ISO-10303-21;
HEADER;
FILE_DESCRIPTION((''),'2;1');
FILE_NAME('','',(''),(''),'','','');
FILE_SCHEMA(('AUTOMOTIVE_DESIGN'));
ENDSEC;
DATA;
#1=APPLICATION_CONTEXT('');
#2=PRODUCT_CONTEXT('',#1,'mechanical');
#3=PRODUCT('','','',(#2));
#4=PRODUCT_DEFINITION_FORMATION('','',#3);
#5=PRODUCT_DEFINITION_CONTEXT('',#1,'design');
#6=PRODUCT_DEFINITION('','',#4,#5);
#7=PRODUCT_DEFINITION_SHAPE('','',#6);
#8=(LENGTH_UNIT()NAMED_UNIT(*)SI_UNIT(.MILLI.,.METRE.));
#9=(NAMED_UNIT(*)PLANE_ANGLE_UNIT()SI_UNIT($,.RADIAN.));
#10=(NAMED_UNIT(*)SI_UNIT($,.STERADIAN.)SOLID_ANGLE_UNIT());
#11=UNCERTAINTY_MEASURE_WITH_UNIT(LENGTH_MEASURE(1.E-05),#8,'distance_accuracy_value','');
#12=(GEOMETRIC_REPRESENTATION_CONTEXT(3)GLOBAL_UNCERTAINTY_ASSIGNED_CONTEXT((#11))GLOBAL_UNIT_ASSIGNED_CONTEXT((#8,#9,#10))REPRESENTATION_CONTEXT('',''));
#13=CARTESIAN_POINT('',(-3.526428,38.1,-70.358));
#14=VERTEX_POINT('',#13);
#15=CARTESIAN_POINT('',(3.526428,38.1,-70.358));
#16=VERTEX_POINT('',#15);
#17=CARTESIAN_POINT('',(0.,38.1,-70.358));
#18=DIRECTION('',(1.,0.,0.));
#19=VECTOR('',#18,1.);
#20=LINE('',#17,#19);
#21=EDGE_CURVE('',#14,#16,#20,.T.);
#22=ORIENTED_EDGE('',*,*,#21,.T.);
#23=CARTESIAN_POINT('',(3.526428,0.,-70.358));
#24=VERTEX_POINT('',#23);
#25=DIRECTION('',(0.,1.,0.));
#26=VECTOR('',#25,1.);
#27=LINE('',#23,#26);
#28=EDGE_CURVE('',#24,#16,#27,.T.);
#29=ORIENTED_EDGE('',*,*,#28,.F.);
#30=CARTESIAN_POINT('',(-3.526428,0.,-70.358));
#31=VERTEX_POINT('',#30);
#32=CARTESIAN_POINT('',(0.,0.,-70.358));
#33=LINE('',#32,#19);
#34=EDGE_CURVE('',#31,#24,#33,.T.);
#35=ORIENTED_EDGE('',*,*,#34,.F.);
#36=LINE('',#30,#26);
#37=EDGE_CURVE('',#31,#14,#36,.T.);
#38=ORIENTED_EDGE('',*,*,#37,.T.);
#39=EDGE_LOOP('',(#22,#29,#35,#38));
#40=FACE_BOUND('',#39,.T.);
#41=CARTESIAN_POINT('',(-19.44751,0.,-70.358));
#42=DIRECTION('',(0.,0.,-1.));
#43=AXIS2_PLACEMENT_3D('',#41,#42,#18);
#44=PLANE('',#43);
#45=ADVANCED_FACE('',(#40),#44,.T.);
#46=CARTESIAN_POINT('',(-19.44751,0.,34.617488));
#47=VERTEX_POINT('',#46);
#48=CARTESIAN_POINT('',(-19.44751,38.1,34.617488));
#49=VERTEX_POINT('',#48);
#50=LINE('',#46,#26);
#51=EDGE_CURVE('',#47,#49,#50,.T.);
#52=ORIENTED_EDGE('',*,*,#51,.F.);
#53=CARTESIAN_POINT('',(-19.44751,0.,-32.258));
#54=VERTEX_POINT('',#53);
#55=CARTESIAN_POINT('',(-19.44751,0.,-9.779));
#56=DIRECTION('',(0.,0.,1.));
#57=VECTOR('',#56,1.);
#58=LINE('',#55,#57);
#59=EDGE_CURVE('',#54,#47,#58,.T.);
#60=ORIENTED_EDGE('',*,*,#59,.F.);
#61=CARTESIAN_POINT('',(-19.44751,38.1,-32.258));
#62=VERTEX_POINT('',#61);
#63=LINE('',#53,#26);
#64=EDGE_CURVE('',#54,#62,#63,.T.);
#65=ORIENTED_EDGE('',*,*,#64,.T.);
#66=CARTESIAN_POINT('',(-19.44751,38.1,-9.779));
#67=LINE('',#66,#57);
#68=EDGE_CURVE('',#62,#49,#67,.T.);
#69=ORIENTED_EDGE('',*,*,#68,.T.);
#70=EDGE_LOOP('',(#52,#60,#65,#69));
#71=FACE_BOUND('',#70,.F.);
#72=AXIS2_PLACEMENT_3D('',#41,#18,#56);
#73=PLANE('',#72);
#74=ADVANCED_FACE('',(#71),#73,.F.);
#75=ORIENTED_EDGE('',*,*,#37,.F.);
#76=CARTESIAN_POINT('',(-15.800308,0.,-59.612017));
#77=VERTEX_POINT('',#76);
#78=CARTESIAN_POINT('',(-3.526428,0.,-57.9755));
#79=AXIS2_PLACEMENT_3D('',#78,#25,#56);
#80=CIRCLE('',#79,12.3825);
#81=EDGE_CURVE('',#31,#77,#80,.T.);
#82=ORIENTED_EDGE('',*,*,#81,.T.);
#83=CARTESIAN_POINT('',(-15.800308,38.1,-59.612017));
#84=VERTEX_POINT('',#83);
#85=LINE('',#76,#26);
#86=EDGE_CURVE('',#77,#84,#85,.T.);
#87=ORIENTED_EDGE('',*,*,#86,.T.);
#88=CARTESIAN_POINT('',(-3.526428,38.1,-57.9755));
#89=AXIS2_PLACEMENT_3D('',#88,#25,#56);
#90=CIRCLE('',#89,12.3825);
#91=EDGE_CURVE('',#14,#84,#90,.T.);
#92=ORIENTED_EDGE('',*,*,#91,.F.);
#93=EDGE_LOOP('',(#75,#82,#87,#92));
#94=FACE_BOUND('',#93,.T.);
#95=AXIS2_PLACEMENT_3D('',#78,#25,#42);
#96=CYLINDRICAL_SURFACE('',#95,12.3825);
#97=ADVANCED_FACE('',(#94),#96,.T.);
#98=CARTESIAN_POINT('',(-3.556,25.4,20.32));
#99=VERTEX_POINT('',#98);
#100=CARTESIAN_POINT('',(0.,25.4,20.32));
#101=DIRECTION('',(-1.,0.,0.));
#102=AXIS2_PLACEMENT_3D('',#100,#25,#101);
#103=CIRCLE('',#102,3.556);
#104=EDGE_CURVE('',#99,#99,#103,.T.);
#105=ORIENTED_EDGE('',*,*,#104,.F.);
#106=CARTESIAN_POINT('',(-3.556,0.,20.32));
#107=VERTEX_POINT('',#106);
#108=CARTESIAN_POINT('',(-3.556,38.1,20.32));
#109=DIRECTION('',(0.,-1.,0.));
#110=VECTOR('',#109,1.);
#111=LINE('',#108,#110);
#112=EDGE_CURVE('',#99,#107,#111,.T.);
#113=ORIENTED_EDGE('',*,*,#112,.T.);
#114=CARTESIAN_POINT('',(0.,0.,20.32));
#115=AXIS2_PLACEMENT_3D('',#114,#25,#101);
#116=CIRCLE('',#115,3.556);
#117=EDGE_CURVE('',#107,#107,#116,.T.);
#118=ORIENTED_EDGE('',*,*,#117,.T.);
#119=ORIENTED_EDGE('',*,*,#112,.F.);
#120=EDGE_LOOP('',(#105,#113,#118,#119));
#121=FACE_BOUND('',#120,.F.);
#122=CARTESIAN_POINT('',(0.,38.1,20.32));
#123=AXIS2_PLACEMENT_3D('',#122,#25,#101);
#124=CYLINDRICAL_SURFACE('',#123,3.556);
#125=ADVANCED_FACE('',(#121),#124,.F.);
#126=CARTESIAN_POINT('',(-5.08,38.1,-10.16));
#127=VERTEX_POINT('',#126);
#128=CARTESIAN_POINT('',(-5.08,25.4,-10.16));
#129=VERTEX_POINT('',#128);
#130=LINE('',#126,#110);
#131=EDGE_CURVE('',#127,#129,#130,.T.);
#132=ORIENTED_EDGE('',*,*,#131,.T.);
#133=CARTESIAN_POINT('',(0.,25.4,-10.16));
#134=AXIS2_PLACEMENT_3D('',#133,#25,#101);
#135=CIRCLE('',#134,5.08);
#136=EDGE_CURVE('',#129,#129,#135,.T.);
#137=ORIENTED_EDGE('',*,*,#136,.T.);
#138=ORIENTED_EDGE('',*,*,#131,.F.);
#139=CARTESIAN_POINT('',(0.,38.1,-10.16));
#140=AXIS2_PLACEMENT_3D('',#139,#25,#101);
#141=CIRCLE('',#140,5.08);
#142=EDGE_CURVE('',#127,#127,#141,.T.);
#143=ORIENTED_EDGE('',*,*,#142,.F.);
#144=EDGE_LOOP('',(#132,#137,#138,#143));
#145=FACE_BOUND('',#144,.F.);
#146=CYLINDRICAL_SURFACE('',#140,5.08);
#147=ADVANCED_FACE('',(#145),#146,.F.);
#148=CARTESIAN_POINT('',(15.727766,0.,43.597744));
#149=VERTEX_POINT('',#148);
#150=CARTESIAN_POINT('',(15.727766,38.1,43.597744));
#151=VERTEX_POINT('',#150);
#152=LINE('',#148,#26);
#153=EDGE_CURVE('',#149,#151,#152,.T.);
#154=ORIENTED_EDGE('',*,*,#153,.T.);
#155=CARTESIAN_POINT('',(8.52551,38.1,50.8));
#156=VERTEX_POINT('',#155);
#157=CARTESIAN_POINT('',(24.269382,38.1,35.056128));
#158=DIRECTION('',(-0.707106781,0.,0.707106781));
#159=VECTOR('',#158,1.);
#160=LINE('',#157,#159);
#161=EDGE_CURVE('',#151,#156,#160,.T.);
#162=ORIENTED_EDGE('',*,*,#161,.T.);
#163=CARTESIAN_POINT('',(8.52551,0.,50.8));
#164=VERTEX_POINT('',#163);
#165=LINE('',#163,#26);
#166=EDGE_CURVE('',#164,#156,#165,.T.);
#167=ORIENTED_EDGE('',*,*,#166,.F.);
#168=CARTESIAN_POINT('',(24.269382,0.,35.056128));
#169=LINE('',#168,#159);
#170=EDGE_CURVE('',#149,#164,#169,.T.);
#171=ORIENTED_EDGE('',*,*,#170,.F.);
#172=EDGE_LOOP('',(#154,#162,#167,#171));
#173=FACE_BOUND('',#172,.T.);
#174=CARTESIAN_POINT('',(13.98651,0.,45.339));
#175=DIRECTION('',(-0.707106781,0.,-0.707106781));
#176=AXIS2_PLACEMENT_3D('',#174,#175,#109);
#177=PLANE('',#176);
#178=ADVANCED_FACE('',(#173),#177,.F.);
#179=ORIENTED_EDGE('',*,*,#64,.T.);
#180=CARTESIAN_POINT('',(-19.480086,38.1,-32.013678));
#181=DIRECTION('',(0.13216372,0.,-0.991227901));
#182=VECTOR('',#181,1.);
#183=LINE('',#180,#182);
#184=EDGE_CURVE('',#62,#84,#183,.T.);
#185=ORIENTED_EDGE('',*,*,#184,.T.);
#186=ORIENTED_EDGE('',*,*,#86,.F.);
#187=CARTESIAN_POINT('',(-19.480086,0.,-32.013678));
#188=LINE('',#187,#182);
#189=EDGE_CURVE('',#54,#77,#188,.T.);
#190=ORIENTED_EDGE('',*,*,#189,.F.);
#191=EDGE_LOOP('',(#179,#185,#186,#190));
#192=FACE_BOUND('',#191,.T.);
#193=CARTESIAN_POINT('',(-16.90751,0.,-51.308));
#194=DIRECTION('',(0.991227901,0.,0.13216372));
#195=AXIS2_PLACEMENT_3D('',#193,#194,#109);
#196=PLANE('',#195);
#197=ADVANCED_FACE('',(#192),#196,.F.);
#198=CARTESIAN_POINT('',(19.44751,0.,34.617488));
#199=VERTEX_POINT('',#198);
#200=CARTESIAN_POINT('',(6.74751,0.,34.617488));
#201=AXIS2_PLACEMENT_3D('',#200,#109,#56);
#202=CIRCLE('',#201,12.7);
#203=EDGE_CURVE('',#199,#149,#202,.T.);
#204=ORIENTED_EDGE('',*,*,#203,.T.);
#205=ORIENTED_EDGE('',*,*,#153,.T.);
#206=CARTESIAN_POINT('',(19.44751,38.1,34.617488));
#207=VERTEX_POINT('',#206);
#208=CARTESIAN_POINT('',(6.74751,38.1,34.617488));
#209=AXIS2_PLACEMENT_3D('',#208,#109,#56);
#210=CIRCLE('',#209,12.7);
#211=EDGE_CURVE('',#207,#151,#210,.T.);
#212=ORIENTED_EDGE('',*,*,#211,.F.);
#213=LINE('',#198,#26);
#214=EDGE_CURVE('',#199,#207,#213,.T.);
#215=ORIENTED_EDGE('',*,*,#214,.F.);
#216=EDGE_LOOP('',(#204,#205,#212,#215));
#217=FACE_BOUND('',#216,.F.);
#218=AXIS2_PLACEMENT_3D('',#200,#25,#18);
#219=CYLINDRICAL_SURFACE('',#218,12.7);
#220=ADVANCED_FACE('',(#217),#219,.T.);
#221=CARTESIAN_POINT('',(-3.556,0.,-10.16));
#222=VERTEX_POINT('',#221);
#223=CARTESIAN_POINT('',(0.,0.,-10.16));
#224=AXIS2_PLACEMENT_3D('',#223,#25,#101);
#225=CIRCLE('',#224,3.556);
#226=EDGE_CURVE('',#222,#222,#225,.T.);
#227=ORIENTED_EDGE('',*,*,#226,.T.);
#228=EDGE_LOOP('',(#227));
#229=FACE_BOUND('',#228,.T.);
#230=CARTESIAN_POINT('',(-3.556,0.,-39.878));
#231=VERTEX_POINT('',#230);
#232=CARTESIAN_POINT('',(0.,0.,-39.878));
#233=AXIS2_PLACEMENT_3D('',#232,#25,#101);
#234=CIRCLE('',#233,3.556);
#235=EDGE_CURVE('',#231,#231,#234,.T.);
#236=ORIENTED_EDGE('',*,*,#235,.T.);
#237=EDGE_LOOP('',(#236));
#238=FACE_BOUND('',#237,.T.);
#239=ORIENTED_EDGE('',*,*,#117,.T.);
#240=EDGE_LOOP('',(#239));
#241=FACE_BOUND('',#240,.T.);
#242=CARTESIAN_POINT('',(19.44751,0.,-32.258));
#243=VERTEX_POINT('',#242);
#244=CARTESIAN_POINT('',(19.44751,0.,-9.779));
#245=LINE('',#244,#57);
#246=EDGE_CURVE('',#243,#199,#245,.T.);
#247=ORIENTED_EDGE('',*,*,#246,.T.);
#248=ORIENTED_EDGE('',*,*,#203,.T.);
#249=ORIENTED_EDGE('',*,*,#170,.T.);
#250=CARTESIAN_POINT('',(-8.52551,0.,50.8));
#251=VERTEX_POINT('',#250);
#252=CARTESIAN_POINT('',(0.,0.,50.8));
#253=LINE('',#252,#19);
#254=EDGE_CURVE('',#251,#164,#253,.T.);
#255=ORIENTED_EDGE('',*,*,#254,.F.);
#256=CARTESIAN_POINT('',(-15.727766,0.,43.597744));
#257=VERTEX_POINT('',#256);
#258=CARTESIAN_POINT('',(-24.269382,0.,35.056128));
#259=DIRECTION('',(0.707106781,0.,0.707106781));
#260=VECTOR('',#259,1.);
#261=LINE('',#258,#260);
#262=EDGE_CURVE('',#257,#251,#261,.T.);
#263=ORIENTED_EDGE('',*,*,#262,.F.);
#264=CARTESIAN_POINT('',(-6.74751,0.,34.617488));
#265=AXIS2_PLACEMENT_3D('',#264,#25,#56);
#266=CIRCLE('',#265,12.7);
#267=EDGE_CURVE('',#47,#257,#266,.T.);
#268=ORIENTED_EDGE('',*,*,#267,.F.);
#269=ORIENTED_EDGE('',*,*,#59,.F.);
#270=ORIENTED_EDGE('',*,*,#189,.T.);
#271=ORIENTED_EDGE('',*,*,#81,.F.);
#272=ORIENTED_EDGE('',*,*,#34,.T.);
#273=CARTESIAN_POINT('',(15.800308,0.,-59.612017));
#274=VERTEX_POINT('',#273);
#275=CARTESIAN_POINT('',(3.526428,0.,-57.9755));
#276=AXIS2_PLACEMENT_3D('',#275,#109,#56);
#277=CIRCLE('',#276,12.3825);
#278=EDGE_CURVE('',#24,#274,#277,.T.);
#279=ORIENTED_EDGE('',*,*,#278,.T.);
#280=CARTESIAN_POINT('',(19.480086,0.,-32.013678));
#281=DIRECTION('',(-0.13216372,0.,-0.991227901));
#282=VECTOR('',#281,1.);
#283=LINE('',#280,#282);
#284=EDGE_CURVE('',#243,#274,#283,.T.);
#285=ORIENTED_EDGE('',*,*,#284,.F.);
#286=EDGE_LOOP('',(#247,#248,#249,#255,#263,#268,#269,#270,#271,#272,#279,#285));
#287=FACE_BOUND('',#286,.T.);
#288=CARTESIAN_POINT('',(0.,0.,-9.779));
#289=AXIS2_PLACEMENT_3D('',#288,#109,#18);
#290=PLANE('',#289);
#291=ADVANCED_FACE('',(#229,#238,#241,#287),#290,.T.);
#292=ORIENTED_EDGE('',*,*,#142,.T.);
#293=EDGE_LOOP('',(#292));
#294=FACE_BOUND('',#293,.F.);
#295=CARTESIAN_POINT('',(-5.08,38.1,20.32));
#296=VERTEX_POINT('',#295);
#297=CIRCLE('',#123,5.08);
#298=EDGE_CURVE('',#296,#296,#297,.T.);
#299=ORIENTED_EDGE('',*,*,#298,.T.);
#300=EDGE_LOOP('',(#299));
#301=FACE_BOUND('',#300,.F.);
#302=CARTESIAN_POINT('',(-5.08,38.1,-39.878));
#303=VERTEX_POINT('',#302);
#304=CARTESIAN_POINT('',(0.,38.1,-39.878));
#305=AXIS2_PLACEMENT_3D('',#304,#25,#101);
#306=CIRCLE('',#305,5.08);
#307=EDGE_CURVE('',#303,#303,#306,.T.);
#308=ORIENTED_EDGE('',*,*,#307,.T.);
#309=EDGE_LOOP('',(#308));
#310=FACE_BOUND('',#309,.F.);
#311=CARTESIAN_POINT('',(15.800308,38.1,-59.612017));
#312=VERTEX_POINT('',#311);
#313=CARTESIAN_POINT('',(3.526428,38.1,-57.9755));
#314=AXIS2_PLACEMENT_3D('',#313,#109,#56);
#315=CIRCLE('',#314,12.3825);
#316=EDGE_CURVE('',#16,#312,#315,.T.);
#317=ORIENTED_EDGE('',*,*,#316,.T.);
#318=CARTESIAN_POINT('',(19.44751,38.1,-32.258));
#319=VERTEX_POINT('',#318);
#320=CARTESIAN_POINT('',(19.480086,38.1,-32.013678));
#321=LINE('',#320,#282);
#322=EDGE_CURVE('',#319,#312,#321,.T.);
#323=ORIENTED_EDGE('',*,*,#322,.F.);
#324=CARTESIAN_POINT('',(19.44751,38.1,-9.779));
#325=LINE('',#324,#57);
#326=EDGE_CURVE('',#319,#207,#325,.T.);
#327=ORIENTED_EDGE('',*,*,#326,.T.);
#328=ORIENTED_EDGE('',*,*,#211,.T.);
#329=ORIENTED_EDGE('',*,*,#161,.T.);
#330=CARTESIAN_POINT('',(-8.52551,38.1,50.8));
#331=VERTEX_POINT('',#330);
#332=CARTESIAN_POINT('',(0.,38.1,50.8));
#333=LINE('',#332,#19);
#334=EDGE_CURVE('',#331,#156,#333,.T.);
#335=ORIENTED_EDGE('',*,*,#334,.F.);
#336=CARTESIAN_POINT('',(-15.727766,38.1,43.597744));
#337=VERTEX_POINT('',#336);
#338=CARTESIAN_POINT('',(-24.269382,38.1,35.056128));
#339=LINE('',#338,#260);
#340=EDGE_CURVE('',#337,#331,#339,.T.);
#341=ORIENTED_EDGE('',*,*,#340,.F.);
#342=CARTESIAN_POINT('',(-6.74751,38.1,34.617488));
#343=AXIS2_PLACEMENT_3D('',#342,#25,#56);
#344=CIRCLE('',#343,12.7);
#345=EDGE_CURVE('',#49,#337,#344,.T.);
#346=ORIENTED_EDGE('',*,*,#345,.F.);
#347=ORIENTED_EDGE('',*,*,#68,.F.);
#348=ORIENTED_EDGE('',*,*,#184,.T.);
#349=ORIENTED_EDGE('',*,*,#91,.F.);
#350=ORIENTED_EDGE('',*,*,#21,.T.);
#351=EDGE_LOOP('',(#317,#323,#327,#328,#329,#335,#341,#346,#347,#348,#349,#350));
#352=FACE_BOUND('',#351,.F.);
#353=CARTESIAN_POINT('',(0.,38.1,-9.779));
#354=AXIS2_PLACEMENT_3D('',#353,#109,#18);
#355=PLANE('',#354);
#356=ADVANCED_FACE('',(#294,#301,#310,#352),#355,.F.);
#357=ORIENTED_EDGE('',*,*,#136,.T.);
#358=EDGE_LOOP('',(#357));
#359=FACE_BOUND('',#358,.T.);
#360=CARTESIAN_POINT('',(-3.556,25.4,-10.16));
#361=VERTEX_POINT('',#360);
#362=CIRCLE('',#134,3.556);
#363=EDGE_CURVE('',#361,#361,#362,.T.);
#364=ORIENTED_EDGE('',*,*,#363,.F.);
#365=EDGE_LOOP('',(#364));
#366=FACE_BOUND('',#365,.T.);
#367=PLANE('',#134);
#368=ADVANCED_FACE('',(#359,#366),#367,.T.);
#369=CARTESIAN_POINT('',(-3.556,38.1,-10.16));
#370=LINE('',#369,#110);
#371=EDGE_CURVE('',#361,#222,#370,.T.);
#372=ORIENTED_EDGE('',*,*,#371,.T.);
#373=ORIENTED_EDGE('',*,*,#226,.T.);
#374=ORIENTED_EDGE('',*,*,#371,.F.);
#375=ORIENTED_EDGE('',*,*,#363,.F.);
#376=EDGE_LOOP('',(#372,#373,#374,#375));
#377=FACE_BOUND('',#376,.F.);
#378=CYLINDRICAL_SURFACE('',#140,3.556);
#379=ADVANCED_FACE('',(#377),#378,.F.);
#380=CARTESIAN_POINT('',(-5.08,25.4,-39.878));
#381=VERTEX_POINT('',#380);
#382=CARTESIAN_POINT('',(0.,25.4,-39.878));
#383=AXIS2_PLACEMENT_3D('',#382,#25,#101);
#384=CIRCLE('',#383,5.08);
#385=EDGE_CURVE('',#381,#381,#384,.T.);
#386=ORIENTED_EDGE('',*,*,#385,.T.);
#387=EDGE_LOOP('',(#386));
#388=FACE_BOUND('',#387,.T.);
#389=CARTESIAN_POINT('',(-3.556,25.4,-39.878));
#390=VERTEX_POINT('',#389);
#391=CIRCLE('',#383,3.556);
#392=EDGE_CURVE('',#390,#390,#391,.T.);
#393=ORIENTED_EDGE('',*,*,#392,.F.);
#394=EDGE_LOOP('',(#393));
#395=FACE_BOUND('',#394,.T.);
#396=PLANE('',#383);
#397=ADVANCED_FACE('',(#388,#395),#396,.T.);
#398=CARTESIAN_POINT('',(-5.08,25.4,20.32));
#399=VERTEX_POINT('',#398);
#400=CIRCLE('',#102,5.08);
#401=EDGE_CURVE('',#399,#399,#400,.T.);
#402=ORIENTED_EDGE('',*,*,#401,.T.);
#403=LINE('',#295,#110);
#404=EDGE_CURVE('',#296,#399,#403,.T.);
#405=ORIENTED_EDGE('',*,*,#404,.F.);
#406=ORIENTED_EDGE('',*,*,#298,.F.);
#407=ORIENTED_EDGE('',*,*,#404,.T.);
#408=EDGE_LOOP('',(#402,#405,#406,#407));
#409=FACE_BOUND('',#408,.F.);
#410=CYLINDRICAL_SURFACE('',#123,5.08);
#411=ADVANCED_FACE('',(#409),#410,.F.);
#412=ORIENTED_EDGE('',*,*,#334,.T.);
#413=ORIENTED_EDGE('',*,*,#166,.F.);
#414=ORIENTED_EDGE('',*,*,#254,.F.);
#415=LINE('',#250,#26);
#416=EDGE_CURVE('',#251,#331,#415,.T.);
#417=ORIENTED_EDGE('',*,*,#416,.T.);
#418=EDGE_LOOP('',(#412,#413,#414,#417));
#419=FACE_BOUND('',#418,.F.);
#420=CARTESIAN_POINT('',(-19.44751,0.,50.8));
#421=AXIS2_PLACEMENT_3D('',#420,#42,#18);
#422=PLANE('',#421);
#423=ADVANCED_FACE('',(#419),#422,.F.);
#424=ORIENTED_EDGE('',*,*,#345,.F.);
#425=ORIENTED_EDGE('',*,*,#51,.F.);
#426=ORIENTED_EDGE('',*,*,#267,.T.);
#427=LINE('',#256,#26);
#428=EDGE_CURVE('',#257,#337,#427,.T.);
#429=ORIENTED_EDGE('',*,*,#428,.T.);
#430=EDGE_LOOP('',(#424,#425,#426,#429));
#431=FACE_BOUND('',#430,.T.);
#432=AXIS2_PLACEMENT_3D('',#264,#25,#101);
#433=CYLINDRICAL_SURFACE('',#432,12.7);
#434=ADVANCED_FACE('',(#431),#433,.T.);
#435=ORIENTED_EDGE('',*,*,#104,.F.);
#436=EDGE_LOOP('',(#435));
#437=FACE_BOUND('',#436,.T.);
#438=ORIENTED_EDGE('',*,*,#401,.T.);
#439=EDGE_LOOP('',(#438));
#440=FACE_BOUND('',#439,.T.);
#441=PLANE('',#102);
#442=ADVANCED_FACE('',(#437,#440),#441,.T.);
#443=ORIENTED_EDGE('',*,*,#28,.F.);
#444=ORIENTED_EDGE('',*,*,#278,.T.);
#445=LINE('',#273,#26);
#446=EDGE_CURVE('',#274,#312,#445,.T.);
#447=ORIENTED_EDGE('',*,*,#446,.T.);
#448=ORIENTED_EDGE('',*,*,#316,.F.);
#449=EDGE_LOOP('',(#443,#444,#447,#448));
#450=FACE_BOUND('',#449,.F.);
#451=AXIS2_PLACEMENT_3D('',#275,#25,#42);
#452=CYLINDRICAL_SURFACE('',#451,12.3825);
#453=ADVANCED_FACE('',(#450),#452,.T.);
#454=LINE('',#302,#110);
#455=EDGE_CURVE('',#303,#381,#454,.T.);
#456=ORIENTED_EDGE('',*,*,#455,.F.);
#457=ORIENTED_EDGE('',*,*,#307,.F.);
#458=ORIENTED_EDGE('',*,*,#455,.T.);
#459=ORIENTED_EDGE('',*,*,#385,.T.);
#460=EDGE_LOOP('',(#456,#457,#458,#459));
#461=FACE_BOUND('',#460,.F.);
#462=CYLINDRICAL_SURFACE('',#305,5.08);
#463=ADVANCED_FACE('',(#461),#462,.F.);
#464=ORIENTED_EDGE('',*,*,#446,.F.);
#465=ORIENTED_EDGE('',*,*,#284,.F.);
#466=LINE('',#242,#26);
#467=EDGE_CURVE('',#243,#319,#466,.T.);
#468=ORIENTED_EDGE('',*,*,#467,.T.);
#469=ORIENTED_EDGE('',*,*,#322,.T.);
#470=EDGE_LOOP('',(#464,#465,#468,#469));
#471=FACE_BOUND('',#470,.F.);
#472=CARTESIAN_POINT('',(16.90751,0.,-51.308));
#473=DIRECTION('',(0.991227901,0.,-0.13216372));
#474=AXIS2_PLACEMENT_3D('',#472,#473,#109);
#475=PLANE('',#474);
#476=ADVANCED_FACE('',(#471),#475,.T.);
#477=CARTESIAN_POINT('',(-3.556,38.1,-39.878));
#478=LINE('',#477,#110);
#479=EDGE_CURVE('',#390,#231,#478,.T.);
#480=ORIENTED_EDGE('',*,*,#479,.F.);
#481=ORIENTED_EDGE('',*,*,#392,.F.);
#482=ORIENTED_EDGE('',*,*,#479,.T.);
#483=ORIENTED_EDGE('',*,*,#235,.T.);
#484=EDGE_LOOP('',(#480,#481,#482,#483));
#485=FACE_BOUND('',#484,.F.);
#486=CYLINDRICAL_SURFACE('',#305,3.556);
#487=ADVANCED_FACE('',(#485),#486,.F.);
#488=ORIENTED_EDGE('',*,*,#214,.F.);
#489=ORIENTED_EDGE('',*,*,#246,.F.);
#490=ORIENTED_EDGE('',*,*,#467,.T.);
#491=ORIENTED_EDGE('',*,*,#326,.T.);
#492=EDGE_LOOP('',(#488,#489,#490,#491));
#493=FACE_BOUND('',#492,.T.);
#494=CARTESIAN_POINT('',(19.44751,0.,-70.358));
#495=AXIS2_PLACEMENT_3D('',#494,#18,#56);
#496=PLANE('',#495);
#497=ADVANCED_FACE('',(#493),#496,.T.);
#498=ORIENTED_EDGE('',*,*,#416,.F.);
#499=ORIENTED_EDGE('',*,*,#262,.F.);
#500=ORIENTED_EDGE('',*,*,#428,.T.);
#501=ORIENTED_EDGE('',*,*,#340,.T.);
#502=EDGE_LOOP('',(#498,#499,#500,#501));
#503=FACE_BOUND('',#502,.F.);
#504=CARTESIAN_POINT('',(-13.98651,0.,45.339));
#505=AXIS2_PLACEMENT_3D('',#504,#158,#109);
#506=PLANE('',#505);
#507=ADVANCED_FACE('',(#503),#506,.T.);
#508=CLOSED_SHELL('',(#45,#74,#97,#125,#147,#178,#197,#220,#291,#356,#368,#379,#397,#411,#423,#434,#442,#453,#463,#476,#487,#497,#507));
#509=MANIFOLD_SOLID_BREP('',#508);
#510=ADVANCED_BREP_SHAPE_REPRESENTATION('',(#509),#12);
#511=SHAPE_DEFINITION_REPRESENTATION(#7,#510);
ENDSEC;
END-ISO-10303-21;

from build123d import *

# Parameters (mm, degrees)
F0_W       = 38.89502
F0_H       = 121.158
F1_DEPTH   = 38.1
F2_SIZE    = 10.922
F3_R       = 12.7
F4_SIZE2   = 5.08
F4_SIZE    = 38.1
F4_2_SIZE2 = 5.08
F4_2_SIZE  = 38.1
F5_R       = 12.3825
F6_R       = 5.08
F6_R_2     = 3.556
F7_DEPTH   = 12.7
F8_DEPTH   = 38.101


with BuildPart() as f1:
    # F0 (on Front) → F1 (new body)
    with BuildSketch(Plane.XZ):
        with Locations((0, -9.779)):
            Rectangle(F0_W, F0_H)
    extrude(amount=-F1_DEPTH)

    # F2
    f2_edges = [f1.edges().sort_by_distance(p)[0] for p in [
        (19.44751, 19.05, 50.8),
        (-19.44751, 19.05, 50.8),
    ]]
    chamfer(f2_edges, length=F2_SIZE)

    # F3
    f3_edges = [f1.edges().sort_by_distance(p)[0] for p in [
        (19.44751, 19.05, 39.878),
        (-19.44751, 19.05, 39.878),
    ]]
    fillet(f3_edges, radius=F3_R)

    # F4
    f4_edges = [f1.edges().sort_by_distance(p)[0] for p in [
        (-19.44751, 19.05, -70.358),
    ]]
    f4_side = f1.faces().sort_by_distance((-19.44751, 19.05, -17.870256))[0]
    chamfer(f4_edges, length=F4_SIZE, length2=F4_SIZE2, reference=f4_side)

    # F4#2
    f4_2_edges = [f1.edges().sort_by_distance(p)[0] for p in [
        (19.44751, 19.05, -70.358),
    ]]
    f4_2_side = f1.faces().sort_by_distance((19.44751, 19.05, -17.870256))[0]
    chamfer(f4_2_edges, length=F4_2_SIZE, length2=F4_2_SIZE2, reference=f4_2_side)

    # F5
    f5_edges = [f1.edges().sort_by_distance(p)[0] for p in [
        (14.36751, 19.05, -70.358),
        (-14.36751, 19.05, -70.358),
    ]]
    fillet(f5_edges, radius=F5_R)

    # F6 (on face) → F7 (cut)
    with BuildSketch(Plane(origin=(0, 38.1, 0), x_dir=(-1, 0, 0), z_dir=(0, 1, 0))):
        with Locations((0, -39.878)):
            Circle(F6_R)
        with Locations((0, -39.878)):
            Circle(F6_R_2, mode=Mode.SUBTRACT)
        with Locations((0, -10.16)):
            Circle(F6_R)
        with Locations((0, -10.16)):
            Circle(F6_R_2, mode=Mode.SUBTRACT)
        with Locations((0, 20.32)):
            Circle(F6_R)
        with Locations((0, 20.32)):
            Circle(F6_R_2, mode=Mode.SUBTRACT)
    extrude(amount=-F7_DEPTH, mode=Mode.SUBTRACT)

    # F6 (on face) → F8 (cut, through all)
    with BuildSketch(Plane(origin=(0, 38.1, 0), x_dir=(-1, 0, 0), z_dir=(0, 1, 0))):
        with Locations((0, 20.32)):
            Circle(F6_R_2)
        with Locations((0, -10.16)):
            Circle(F6_R_2)
        with Locations((0, -39.878)):
            Circle(F6_R_2)
    extrude(amount=-F8_DEPTH, mode=Mode.SUBTRACT)


solid = f1.part
